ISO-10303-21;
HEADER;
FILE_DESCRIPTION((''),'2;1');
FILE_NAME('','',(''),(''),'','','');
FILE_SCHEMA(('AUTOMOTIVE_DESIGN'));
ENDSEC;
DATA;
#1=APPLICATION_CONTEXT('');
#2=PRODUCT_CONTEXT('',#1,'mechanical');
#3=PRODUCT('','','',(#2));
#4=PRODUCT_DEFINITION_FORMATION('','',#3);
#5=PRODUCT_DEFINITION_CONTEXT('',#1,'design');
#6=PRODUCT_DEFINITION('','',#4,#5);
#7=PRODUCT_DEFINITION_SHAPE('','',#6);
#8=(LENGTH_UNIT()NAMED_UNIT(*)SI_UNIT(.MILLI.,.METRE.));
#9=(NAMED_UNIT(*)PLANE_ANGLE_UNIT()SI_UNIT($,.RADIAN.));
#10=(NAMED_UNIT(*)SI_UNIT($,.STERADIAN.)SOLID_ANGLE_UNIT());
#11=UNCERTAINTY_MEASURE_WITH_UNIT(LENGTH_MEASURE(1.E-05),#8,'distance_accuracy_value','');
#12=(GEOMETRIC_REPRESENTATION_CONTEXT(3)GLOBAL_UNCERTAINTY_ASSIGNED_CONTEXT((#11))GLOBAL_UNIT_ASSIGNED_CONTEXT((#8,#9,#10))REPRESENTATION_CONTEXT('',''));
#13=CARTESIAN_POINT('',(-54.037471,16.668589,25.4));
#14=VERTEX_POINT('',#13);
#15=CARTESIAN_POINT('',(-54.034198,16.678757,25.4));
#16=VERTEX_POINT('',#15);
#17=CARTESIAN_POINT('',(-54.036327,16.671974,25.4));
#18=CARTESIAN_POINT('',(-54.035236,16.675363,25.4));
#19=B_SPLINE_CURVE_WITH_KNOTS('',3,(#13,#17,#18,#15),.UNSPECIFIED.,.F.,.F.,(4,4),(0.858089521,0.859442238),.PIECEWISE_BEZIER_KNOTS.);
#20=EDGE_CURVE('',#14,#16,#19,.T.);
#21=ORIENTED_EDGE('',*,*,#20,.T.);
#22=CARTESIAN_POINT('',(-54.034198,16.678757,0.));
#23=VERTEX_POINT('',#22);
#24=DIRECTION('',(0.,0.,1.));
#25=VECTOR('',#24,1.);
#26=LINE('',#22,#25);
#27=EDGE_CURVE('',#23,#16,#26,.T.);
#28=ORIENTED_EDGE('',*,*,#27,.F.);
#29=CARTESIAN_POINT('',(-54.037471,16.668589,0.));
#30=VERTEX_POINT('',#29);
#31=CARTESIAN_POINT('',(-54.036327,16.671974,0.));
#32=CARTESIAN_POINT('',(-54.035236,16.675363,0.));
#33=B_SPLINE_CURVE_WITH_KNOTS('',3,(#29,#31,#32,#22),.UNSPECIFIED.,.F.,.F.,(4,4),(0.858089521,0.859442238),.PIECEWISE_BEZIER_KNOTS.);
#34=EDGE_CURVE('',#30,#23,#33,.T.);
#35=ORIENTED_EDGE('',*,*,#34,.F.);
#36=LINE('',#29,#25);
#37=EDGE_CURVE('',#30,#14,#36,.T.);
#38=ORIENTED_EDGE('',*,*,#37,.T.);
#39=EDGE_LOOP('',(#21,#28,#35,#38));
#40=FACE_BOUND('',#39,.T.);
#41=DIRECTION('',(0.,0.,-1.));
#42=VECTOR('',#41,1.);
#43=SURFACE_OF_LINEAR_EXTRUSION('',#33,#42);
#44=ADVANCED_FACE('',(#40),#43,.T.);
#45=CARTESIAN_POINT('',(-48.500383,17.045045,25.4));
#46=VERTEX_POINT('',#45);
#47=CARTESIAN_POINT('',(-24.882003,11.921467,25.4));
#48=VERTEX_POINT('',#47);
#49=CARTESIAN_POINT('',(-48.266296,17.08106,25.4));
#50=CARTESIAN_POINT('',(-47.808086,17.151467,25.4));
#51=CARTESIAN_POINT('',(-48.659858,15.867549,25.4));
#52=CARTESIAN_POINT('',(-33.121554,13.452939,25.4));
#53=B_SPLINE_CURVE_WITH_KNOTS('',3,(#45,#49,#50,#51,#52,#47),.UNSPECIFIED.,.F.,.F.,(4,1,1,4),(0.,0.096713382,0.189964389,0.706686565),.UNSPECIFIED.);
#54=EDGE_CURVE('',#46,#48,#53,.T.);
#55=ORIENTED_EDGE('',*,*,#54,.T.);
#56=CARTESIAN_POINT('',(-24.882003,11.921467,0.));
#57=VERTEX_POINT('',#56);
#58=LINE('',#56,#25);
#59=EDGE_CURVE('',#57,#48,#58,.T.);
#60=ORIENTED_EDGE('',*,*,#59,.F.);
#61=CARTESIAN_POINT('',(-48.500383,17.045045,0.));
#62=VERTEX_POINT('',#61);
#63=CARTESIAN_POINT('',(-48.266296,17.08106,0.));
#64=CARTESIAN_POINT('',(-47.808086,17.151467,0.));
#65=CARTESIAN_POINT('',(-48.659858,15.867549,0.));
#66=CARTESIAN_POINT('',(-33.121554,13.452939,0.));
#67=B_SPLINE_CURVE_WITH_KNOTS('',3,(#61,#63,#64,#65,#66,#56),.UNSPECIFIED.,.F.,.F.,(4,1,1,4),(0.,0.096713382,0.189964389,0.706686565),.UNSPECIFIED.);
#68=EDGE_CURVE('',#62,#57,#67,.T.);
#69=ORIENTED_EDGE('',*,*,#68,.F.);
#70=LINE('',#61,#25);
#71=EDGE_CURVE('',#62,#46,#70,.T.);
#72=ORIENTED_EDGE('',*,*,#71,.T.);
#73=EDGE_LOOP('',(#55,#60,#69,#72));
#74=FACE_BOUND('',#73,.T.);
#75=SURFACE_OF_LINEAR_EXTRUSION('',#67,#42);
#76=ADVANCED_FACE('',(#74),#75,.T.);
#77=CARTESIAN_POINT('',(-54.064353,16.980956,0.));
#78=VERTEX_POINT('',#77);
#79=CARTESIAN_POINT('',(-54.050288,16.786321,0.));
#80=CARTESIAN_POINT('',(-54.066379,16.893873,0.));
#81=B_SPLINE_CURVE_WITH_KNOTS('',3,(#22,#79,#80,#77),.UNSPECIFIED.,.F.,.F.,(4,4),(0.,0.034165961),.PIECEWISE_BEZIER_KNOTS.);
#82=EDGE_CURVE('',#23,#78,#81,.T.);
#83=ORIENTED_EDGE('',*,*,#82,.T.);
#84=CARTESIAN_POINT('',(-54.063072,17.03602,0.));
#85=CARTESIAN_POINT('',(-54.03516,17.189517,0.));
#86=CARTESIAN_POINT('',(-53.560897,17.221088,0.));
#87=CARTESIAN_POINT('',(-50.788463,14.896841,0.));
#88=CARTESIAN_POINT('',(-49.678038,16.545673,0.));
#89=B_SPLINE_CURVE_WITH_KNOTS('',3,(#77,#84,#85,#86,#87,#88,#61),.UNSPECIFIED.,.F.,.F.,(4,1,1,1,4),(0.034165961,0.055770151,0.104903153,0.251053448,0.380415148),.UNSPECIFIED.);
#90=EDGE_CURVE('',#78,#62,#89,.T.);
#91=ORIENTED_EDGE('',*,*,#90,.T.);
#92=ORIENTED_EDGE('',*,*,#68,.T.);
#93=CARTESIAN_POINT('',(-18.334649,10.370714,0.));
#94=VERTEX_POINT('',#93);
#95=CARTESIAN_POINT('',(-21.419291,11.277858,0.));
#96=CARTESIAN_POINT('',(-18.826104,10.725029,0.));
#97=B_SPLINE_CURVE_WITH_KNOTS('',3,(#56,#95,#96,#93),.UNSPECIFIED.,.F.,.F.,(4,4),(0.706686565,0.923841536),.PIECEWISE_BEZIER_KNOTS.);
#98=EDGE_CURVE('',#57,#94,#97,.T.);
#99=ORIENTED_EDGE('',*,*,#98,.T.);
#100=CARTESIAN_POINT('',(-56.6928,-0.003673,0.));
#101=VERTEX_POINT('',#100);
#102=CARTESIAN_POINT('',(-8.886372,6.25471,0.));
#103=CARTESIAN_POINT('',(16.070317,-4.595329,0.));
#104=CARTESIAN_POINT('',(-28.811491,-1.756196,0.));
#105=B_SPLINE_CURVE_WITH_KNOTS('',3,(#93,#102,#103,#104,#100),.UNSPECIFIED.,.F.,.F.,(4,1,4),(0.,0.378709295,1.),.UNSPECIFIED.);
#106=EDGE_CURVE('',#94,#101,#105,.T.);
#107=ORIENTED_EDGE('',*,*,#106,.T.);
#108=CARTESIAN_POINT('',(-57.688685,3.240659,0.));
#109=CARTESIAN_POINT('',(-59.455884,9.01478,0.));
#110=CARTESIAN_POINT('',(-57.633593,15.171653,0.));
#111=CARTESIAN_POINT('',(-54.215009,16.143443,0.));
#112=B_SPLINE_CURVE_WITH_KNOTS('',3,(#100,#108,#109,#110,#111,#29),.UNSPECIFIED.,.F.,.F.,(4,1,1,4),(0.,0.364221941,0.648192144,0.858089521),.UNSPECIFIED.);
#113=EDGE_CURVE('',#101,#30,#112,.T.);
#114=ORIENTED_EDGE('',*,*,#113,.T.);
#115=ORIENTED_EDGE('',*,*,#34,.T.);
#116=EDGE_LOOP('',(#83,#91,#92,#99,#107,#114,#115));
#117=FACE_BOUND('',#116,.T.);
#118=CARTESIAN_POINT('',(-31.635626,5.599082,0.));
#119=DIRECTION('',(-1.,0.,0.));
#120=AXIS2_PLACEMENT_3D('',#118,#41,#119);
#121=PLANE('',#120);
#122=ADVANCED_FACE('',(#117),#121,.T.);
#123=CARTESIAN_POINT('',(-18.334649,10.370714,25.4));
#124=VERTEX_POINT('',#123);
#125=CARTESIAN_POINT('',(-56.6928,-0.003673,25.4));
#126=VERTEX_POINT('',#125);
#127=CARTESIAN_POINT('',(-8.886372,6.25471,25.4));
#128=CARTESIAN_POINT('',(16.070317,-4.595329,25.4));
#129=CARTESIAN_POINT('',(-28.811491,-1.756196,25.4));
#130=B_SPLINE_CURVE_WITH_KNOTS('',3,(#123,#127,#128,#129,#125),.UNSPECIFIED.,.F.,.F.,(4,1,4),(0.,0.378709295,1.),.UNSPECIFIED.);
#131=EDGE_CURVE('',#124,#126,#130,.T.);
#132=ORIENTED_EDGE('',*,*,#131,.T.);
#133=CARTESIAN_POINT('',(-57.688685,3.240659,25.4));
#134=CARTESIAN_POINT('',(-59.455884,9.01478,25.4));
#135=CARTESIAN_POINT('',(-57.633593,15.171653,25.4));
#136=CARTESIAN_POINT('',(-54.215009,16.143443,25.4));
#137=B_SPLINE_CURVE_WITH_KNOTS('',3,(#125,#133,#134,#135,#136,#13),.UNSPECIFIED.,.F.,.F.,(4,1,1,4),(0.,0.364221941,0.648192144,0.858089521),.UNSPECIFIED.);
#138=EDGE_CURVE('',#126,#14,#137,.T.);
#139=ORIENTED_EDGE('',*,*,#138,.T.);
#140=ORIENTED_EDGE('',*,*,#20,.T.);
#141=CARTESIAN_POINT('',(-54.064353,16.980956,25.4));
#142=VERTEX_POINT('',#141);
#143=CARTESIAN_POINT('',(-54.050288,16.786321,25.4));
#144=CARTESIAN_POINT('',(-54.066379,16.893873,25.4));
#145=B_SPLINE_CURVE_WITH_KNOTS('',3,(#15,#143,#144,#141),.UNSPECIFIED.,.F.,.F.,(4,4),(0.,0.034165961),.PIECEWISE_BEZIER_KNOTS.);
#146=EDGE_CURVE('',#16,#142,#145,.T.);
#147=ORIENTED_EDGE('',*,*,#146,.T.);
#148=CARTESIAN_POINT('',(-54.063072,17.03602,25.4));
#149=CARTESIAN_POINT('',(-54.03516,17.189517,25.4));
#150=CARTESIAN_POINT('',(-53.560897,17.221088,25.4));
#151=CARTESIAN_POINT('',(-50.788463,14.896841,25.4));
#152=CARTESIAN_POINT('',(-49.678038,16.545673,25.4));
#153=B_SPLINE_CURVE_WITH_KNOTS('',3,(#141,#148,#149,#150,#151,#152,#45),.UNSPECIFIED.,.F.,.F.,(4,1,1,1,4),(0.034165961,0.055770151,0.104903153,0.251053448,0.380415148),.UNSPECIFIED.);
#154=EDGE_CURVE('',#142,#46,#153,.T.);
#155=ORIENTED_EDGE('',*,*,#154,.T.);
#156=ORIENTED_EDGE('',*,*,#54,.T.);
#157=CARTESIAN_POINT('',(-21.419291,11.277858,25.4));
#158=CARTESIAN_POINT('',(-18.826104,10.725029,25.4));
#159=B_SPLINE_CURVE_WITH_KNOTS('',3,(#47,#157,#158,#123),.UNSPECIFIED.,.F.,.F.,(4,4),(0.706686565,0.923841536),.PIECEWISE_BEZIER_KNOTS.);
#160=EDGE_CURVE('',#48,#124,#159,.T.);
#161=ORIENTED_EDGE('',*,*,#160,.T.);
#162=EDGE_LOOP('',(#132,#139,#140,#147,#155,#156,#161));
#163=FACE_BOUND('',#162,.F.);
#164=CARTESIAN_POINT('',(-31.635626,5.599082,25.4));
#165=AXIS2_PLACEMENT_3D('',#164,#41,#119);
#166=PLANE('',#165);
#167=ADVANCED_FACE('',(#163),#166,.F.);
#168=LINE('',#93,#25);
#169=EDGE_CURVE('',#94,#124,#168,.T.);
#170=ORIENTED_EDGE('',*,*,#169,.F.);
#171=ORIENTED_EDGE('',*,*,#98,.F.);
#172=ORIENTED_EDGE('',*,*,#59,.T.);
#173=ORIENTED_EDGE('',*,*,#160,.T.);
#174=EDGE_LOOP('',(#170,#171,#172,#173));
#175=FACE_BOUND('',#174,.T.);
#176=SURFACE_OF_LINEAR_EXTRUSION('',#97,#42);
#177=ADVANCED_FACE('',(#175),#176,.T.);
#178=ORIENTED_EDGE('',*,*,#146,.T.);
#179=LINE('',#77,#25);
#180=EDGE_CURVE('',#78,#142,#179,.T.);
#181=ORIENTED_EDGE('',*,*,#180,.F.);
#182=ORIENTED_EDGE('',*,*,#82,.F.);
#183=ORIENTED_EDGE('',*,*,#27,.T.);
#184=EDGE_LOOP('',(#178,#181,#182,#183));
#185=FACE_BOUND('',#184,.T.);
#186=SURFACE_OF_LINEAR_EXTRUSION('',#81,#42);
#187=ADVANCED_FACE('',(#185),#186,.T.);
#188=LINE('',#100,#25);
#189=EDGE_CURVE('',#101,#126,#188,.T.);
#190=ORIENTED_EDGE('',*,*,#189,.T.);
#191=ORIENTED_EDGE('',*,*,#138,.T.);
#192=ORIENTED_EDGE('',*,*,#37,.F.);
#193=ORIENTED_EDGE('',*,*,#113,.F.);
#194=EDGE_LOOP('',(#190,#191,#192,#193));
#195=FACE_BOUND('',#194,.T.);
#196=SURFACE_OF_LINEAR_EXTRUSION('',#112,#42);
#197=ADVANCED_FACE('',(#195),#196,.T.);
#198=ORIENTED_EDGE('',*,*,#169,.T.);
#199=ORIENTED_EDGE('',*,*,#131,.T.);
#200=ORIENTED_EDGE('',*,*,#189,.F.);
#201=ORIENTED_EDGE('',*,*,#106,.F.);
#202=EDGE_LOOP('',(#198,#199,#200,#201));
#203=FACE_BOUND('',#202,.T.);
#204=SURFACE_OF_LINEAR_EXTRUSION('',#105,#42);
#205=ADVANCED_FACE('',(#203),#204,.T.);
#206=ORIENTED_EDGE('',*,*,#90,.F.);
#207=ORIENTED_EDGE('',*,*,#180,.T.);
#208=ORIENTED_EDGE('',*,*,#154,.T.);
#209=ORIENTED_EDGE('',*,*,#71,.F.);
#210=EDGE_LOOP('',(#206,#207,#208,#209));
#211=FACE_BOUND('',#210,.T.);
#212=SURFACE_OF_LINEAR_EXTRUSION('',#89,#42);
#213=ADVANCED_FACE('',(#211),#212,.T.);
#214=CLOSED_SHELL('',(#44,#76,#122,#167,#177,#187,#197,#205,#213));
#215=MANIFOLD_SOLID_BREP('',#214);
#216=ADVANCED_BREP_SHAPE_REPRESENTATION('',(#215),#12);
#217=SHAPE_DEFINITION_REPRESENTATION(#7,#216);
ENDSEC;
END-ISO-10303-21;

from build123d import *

# Parameters (mm, degrees)
F1_DEPTH = 25.4


with BuildPart() as f1:
    # F0 (on Top) → F1 (new body)
    with BuildSketch(Plane.XY):
        with BuildLine():
            add(Edge.make_bspline(
                [(-56.692799881, -0.0036726283), (-57.6886849621, 3.2406589588), (-59.4558836953, 9.0147803753), (-57.6335925474, 15.1716527815), (-54.2150090511, 16.1434428045), (-54.0374711329, 16.6685893238)],
                knots=[0, 0, 0, 0, 0.3642219407, 0.6481921445, 0.8580895209, 0.8580895209, 0.8580895209, 0.8580895209], degree=3))
            add(Edge.make_bspline(
                [(-18.3346489125, 10.3707137249), (-8.8863715899, 6.2547101865), (16.0703166253, -4.5953287781), (-28.8114906143, -1.7561958357), (-56.692799881, -0.0036726283)],
                knots=[0, 0, 0, 0, 0.3787092952, 1, 1, 1, 1], degree=3))
            add(Edge.make_bspline(
                [(-24.8820025145, 11.9214665673), (-22.0855730218, 11.0824777116), (-19.7342558688, 10.4620045553), (-18.3346489125, 10.3707137249)],
                knots=[0.7425998676, 0.7425998676, 0.7425998676, 0.7425998676, 0.8629450751, 0.8629450751, 0.8629450751, 0.8629450751], degree=3))
            add(Edge.make_bspline(
                [(-48.5003830651, 17.0450448134), (-48.2662958708, 17.0810595282), (-47.8080860608, 17.1514673656), (-48.6598579026, 15.8675494941), (-33.1215542234, 13.4529388682), (-24.8820025145, 11.9214665673)],
                knots=[0, 0, 0, 0, 0.0967133823, 0.1899643894, 0.7066865652, 0.7066865652, 0.7066865652, 0.7066865652], degree=3))
            add(Edge.make_bspline(
                [(-54.0643529306, 16.9809556211), (-54.0630720504, 17.0360204594), (-54.0351601992, 17.1895166337), (-53.5608966685, 17.2210881333), (-50.7884631469, 14.896841086), (-49.678037834, 16.5456728688), (-48.5003830651, 17.0450448134)],
                knots=[0.034165961, 0.034165961, 0.034165961, 0.034165961, 0.0557701507, 0.1049031527, 0.2510534482, 0.3804151484, 0.3804151484, 0.3804151484, 0.3804151484], degree=3))
            add(Edge.make_bspline(
                [(-54.0341979894, 16.678756619), (-54.0044907399, 16.7759091238), (-54.0185643259, 16.8770043639), (-54.0643529306, 16.9809556211)],
                knots=[0.8594422377, 0.8594422377, 0.8594422377, 0.8594422377, 0.8981650761, 0.8981650761, 0.8981650761, 0.8981650761], degree=3))
            add(Edge.make_bspline(
                [(-54.0374711329, 16.6685893238), (-54.0363269617, 16.6719737136), (-54.0352357619, 16.6753627606), (-54.0341979894, 16.678756619)],
                knots=[0.8580895209, 0.8580895209, 0.8580895209, 0.8580895209, 0.8594422377, 0.8594422377, 0.8594422377, 0.8594422377], degree=3))
        make_face()
        with BuildLine():
            add(Edge.make_bspline(
                [(-24.8820025145, 11.9214665673), (-22.0855730218, 11.0824777116), (-19.7342558688, 10.4620045553), (-18.3346489125, 10.3707137249)],
                knots=[0.7425998676, 0.7425998676, 0.7425998676, 0.7425998676, 0.8629450751, 0.8629450751, 0.8629450751, 0.8629450751], degree=3))
            add(Edge.make_bspline(
                [(-24.8820025145, 11.9214665673), (-21.4192914248, 11.277857994), (-18.8261043501, 10.7250289492), (-18.3346489125, 10.3707137249)],
                knots=[0.7066865652, 0.7066865652, 0.7066865652, 0.7066865652, 0.9238415357, 0.9238415357, 0.9238415357, 0.9238415357], degree=3))
        make_face()
        with BuildLine():
            add(Edge.make_bspline(
                [(-54.0341979894, 16.678756619), (-54.0502875491, 16.7863208315), (-54.0663785796, 16.8938732942), (-54.0643529306, 16.9809556211)],
                knots=[0, 0, 0, 0, 0.034165961, 0.034165961, 0.034165961, 0.034165961], degree=3))
            add(Edge.make_bspline(
                [(-54.0341979894, 16.678756619), (-54.0044907399, 16.7759091238), (-54.0185643259, 16.8770043639), (-54.0643529306, 16.9809556211)],
                knots=[0.8594422377, 0.8594422377, 0.8594422377, 0.8594422377, 0.8981650761, 0.8981650761, 0.8981650761, 0.8981650761], degree=3))
        make_face()
    extrude(amount=F1_DEPTH)


solid = f1.part
